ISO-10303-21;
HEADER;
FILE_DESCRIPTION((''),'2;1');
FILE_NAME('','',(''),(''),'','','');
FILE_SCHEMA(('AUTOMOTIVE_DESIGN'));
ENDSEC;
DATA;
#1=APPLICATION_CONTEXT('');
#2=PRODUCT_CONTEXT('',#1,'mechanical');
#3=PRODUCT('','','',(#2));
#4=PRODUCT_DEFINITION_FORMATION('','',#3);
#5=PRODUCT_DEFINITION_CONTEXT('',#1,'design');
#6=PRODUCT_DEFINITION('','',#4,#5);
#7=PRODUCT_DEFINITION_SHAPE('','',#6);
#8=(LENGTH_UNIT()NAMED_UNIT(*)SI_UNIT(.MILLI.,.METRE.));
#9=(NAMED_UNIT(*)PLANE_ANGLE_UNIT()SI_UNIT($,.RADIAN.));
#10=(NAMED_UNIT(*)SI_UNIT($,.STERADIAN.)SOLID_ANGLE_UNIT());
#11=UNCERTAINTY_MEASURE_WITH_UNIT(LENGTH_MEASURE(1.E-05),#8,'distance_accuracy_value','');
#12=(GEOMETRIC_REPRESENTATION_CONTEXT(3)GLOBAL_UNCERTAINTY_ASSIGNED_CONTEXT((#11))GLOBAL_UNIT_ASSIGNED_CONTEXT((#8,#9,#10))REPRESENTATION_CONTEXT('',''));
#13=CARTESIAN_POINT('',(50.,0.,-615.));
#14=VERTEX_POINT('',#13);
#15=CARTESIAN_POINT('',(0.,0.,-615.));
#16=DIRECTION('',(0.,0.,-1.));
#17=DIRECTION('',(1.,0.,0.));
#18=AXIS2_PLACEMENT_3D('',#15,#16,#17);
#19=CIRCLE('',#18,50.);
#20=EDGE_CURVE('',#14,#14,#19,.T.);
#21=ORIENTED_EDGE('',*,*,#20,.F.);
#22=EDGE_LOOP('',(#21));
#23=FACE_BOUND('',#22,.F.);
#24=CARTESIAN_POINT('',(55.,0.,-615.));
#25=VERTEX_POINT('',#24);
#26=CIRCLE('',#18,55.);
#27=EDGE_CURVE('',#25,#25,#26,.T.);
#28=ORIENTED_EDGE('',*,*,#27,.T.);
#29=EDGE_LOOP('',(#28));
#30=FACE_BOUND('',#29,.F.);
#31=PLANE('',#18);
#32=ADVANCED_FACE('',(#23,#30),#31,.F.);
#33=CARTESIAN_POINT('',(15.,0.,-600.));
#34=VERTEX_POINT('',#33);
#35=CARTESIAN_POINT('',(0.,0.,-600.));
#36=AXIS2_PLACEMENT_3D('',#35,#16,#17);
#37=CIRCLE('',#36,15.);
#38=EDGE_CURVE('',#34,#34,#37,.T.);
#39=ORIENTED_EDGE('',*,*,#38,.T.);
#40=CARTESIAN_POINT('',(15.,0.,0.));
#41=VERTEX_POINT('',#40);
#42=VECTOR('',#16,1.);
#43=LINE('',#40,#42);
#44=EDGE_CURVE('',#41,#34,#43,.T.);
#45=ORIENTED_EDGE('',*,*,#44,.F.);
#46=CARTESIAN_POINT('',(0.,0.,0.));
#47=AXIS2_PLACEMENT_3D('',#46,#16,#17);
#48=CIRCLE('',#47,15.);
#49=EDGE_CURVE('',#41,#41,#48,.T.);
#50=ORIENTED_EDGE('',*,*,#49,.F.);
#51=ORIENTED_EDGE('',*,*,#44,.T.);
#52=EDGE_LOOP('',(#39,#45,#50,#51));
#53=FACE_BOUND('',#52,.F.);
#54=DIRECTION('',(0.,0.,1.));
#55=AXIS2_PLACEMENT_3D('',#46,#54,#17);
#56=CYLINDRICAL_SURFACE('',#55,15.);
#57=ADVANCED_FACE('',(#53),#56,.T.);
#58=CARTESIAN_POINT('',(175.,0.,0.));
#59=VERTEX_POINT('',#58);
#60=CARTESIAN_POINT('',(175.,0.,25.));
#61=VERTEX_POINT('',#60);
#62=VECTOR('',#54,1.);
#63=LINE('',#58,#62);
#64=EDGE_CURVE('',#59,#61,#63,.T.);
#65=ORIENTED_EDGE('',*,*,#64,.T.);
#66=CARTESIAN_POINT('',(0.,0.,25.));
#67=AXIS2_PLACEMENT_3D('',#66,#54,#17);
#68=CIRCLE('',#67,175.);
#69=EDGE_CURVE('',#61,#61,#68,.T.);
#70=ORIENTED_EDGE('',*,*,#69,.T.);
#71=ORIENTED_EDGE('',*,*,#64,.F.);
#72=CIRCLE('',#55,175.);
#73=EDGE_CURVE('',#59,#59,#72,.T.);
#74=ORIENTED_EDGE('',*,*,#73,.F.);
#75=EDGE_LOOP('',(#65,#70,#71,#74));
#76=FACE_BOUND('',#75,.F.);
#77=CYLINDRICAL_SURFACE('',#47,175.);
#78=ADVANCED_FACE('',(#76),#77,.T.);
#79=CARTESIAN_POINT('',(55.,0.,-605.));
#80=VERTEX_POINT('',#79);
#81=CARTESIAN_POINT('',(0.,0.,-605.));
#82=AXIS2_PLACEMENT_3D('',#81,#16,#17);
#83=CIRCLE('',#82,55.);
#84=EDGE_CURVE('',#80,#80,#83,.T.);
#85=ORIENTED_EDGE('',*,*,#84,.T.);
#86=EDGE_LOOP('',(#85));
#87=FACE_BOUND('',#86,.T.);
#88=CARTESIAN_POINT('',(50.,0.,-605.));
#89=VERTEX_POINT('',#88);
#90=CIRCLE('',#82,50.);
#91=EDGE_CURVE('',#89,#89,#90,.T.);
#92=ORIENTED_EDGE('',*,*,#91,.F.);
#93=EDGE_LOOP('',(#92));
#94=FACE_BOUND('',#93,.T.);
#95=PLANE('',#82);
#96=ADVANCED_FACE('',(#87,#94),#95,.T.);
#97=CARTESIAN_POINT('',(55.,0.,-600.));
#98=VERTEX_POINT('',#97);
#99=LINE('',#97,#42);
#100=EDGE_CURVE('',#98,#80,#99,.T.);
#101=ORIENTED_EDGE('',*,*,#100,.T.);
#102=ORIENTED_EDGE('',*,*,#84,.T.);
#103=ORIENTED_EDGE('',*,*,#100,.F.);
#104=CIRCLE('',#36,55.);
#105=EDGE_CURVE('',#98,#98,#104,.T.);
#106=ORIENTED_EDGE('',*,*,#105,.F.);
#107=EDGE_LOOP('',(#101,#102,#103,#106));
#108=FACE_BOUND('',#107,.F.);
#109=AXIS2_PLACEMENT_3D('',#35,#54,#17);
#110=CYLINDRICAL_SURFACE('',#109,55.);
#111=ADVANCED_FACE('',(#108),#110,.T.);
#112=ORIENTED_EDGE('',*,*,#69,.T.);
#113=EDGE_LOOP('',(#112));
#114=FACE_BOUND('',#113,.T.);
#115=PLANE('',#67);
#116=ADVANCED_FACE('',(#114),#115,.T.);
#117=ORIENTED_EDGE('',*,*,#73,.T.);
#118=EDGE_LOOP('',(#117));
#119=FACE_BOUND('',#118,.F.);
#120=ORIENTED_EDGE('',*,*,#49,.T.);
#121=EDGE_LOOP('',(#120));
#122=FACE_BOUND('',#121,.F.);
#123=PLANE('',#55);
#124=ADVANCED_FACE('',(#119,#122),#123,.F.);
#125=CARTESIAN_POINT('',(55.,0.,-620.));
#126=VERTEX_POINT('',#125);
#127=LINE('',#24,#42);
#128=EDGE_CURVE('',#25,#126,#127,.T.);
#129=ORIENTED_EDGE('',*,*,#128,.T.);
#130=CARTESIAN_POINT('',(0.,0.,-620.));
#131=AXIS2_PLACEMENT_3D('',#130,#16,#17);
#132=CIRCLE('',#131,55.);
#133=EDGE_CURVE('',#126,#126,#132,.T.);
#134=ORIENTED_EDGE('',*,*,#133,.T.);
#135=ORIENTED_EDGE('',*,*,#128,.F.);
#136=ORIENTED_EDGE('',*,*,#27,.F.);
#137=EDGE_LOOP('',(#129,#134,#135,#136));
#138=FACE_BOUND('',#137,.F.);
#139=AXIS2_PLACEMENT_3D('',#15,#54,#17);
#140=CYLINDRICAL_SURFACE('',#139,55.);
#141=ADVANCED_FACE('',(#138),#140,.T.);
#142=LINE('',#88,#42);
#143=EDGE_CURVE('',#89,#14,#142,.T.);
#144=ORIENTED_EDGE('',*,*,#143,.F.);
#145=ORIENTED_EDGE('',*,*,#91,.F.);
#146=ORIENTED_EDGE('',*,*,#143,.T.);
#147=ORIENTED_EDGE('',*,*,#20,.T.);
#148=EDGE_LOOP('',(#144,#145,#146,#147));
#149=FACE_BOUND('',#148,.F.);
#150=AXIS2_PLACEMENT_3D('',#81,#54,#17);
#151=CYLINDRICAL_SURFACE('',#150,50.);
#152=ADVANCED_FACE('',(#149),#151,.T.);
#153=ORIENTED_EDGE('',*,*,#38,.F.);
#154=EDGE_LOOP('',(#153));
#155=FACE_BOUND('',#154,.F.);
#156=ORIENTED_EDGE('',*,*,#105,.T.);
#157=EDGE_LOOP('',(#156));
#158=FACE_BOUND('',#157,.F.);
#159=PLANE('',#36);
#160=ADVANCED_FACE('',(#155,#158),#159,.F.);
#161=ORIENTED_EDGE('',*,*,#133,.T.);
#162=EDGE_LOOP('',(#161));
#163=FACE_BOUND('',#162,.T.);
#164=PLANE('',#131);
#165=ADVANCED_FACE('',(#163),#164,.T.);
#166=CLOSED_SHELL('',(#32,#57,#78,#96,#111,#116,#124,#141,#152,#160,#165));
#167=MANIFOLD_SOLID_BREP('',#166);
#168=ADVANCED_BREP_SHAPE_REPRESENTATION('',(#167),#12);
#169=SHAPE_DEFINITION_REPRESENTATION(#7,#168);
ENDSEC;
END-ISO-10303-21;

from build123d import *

# Parameters (mm, degrees)
F0_R     = 175
F1_DEPTH = 25
F2_R     = 15
F3_DEPTH = 600
F4_R     = 55
F4_R_2   = 15
F5_DEPTH = 5
F6_R     = 50
F7_DEPTH = 10
F8_R     = 55
F8_R_2   = 50
F9_DEPTH = 5


with BuildPart() as f1:
    # F0 (on Top) → F1 (new body)
    with BuildSketch(Plane.XY):
        Circle(F0_R)
    extrude(amount=F1_DEPTH)

    # F2 (on face) → F3 (join)
    with BuildSketch(Plane(origin=(0, 0, 0), x_dir=(1, 0, 0), z_dir=(0, 0, -1))):
        Circle(F2_R)
    extrude(amount=F3_DEPTH)

    # F4 (on face) → F5 (join)
    with BuildSketch(Plane(origin=(0, 0, -600), x_dir=(1, 0, 0), z_dir=(0, 0, -1))):
        Circle(F4_R)
        Circle(F4_R_2, mode=Mode.SUBTRACT)
        Circle(F4_R_2)
    extrude(amount=F5_DEPTH)

    # F6 (on face) → F7 (join)
    with BuildSketch(Plane(origin=(0, 0, -605), x_dir=(1, 0, 0), z_dir=(0, 0, -1))):
        Circle(F6_R)
    extrude(amount=F7_DEPTH)

    # F8 (on face) → F9 (join)
    with BuildSketch(Plane(origin=(0, 0, -615), x_dir=(1, 0, 0), z_dir=(0, 0, -1))):
        Circle(F8_R)
        Circle(F8_R_2, mode=Mode.SUBTRACT)
        Circle(F8_R_2)
    extrude(amount=F9_DEPTH)


solid = f1.part
